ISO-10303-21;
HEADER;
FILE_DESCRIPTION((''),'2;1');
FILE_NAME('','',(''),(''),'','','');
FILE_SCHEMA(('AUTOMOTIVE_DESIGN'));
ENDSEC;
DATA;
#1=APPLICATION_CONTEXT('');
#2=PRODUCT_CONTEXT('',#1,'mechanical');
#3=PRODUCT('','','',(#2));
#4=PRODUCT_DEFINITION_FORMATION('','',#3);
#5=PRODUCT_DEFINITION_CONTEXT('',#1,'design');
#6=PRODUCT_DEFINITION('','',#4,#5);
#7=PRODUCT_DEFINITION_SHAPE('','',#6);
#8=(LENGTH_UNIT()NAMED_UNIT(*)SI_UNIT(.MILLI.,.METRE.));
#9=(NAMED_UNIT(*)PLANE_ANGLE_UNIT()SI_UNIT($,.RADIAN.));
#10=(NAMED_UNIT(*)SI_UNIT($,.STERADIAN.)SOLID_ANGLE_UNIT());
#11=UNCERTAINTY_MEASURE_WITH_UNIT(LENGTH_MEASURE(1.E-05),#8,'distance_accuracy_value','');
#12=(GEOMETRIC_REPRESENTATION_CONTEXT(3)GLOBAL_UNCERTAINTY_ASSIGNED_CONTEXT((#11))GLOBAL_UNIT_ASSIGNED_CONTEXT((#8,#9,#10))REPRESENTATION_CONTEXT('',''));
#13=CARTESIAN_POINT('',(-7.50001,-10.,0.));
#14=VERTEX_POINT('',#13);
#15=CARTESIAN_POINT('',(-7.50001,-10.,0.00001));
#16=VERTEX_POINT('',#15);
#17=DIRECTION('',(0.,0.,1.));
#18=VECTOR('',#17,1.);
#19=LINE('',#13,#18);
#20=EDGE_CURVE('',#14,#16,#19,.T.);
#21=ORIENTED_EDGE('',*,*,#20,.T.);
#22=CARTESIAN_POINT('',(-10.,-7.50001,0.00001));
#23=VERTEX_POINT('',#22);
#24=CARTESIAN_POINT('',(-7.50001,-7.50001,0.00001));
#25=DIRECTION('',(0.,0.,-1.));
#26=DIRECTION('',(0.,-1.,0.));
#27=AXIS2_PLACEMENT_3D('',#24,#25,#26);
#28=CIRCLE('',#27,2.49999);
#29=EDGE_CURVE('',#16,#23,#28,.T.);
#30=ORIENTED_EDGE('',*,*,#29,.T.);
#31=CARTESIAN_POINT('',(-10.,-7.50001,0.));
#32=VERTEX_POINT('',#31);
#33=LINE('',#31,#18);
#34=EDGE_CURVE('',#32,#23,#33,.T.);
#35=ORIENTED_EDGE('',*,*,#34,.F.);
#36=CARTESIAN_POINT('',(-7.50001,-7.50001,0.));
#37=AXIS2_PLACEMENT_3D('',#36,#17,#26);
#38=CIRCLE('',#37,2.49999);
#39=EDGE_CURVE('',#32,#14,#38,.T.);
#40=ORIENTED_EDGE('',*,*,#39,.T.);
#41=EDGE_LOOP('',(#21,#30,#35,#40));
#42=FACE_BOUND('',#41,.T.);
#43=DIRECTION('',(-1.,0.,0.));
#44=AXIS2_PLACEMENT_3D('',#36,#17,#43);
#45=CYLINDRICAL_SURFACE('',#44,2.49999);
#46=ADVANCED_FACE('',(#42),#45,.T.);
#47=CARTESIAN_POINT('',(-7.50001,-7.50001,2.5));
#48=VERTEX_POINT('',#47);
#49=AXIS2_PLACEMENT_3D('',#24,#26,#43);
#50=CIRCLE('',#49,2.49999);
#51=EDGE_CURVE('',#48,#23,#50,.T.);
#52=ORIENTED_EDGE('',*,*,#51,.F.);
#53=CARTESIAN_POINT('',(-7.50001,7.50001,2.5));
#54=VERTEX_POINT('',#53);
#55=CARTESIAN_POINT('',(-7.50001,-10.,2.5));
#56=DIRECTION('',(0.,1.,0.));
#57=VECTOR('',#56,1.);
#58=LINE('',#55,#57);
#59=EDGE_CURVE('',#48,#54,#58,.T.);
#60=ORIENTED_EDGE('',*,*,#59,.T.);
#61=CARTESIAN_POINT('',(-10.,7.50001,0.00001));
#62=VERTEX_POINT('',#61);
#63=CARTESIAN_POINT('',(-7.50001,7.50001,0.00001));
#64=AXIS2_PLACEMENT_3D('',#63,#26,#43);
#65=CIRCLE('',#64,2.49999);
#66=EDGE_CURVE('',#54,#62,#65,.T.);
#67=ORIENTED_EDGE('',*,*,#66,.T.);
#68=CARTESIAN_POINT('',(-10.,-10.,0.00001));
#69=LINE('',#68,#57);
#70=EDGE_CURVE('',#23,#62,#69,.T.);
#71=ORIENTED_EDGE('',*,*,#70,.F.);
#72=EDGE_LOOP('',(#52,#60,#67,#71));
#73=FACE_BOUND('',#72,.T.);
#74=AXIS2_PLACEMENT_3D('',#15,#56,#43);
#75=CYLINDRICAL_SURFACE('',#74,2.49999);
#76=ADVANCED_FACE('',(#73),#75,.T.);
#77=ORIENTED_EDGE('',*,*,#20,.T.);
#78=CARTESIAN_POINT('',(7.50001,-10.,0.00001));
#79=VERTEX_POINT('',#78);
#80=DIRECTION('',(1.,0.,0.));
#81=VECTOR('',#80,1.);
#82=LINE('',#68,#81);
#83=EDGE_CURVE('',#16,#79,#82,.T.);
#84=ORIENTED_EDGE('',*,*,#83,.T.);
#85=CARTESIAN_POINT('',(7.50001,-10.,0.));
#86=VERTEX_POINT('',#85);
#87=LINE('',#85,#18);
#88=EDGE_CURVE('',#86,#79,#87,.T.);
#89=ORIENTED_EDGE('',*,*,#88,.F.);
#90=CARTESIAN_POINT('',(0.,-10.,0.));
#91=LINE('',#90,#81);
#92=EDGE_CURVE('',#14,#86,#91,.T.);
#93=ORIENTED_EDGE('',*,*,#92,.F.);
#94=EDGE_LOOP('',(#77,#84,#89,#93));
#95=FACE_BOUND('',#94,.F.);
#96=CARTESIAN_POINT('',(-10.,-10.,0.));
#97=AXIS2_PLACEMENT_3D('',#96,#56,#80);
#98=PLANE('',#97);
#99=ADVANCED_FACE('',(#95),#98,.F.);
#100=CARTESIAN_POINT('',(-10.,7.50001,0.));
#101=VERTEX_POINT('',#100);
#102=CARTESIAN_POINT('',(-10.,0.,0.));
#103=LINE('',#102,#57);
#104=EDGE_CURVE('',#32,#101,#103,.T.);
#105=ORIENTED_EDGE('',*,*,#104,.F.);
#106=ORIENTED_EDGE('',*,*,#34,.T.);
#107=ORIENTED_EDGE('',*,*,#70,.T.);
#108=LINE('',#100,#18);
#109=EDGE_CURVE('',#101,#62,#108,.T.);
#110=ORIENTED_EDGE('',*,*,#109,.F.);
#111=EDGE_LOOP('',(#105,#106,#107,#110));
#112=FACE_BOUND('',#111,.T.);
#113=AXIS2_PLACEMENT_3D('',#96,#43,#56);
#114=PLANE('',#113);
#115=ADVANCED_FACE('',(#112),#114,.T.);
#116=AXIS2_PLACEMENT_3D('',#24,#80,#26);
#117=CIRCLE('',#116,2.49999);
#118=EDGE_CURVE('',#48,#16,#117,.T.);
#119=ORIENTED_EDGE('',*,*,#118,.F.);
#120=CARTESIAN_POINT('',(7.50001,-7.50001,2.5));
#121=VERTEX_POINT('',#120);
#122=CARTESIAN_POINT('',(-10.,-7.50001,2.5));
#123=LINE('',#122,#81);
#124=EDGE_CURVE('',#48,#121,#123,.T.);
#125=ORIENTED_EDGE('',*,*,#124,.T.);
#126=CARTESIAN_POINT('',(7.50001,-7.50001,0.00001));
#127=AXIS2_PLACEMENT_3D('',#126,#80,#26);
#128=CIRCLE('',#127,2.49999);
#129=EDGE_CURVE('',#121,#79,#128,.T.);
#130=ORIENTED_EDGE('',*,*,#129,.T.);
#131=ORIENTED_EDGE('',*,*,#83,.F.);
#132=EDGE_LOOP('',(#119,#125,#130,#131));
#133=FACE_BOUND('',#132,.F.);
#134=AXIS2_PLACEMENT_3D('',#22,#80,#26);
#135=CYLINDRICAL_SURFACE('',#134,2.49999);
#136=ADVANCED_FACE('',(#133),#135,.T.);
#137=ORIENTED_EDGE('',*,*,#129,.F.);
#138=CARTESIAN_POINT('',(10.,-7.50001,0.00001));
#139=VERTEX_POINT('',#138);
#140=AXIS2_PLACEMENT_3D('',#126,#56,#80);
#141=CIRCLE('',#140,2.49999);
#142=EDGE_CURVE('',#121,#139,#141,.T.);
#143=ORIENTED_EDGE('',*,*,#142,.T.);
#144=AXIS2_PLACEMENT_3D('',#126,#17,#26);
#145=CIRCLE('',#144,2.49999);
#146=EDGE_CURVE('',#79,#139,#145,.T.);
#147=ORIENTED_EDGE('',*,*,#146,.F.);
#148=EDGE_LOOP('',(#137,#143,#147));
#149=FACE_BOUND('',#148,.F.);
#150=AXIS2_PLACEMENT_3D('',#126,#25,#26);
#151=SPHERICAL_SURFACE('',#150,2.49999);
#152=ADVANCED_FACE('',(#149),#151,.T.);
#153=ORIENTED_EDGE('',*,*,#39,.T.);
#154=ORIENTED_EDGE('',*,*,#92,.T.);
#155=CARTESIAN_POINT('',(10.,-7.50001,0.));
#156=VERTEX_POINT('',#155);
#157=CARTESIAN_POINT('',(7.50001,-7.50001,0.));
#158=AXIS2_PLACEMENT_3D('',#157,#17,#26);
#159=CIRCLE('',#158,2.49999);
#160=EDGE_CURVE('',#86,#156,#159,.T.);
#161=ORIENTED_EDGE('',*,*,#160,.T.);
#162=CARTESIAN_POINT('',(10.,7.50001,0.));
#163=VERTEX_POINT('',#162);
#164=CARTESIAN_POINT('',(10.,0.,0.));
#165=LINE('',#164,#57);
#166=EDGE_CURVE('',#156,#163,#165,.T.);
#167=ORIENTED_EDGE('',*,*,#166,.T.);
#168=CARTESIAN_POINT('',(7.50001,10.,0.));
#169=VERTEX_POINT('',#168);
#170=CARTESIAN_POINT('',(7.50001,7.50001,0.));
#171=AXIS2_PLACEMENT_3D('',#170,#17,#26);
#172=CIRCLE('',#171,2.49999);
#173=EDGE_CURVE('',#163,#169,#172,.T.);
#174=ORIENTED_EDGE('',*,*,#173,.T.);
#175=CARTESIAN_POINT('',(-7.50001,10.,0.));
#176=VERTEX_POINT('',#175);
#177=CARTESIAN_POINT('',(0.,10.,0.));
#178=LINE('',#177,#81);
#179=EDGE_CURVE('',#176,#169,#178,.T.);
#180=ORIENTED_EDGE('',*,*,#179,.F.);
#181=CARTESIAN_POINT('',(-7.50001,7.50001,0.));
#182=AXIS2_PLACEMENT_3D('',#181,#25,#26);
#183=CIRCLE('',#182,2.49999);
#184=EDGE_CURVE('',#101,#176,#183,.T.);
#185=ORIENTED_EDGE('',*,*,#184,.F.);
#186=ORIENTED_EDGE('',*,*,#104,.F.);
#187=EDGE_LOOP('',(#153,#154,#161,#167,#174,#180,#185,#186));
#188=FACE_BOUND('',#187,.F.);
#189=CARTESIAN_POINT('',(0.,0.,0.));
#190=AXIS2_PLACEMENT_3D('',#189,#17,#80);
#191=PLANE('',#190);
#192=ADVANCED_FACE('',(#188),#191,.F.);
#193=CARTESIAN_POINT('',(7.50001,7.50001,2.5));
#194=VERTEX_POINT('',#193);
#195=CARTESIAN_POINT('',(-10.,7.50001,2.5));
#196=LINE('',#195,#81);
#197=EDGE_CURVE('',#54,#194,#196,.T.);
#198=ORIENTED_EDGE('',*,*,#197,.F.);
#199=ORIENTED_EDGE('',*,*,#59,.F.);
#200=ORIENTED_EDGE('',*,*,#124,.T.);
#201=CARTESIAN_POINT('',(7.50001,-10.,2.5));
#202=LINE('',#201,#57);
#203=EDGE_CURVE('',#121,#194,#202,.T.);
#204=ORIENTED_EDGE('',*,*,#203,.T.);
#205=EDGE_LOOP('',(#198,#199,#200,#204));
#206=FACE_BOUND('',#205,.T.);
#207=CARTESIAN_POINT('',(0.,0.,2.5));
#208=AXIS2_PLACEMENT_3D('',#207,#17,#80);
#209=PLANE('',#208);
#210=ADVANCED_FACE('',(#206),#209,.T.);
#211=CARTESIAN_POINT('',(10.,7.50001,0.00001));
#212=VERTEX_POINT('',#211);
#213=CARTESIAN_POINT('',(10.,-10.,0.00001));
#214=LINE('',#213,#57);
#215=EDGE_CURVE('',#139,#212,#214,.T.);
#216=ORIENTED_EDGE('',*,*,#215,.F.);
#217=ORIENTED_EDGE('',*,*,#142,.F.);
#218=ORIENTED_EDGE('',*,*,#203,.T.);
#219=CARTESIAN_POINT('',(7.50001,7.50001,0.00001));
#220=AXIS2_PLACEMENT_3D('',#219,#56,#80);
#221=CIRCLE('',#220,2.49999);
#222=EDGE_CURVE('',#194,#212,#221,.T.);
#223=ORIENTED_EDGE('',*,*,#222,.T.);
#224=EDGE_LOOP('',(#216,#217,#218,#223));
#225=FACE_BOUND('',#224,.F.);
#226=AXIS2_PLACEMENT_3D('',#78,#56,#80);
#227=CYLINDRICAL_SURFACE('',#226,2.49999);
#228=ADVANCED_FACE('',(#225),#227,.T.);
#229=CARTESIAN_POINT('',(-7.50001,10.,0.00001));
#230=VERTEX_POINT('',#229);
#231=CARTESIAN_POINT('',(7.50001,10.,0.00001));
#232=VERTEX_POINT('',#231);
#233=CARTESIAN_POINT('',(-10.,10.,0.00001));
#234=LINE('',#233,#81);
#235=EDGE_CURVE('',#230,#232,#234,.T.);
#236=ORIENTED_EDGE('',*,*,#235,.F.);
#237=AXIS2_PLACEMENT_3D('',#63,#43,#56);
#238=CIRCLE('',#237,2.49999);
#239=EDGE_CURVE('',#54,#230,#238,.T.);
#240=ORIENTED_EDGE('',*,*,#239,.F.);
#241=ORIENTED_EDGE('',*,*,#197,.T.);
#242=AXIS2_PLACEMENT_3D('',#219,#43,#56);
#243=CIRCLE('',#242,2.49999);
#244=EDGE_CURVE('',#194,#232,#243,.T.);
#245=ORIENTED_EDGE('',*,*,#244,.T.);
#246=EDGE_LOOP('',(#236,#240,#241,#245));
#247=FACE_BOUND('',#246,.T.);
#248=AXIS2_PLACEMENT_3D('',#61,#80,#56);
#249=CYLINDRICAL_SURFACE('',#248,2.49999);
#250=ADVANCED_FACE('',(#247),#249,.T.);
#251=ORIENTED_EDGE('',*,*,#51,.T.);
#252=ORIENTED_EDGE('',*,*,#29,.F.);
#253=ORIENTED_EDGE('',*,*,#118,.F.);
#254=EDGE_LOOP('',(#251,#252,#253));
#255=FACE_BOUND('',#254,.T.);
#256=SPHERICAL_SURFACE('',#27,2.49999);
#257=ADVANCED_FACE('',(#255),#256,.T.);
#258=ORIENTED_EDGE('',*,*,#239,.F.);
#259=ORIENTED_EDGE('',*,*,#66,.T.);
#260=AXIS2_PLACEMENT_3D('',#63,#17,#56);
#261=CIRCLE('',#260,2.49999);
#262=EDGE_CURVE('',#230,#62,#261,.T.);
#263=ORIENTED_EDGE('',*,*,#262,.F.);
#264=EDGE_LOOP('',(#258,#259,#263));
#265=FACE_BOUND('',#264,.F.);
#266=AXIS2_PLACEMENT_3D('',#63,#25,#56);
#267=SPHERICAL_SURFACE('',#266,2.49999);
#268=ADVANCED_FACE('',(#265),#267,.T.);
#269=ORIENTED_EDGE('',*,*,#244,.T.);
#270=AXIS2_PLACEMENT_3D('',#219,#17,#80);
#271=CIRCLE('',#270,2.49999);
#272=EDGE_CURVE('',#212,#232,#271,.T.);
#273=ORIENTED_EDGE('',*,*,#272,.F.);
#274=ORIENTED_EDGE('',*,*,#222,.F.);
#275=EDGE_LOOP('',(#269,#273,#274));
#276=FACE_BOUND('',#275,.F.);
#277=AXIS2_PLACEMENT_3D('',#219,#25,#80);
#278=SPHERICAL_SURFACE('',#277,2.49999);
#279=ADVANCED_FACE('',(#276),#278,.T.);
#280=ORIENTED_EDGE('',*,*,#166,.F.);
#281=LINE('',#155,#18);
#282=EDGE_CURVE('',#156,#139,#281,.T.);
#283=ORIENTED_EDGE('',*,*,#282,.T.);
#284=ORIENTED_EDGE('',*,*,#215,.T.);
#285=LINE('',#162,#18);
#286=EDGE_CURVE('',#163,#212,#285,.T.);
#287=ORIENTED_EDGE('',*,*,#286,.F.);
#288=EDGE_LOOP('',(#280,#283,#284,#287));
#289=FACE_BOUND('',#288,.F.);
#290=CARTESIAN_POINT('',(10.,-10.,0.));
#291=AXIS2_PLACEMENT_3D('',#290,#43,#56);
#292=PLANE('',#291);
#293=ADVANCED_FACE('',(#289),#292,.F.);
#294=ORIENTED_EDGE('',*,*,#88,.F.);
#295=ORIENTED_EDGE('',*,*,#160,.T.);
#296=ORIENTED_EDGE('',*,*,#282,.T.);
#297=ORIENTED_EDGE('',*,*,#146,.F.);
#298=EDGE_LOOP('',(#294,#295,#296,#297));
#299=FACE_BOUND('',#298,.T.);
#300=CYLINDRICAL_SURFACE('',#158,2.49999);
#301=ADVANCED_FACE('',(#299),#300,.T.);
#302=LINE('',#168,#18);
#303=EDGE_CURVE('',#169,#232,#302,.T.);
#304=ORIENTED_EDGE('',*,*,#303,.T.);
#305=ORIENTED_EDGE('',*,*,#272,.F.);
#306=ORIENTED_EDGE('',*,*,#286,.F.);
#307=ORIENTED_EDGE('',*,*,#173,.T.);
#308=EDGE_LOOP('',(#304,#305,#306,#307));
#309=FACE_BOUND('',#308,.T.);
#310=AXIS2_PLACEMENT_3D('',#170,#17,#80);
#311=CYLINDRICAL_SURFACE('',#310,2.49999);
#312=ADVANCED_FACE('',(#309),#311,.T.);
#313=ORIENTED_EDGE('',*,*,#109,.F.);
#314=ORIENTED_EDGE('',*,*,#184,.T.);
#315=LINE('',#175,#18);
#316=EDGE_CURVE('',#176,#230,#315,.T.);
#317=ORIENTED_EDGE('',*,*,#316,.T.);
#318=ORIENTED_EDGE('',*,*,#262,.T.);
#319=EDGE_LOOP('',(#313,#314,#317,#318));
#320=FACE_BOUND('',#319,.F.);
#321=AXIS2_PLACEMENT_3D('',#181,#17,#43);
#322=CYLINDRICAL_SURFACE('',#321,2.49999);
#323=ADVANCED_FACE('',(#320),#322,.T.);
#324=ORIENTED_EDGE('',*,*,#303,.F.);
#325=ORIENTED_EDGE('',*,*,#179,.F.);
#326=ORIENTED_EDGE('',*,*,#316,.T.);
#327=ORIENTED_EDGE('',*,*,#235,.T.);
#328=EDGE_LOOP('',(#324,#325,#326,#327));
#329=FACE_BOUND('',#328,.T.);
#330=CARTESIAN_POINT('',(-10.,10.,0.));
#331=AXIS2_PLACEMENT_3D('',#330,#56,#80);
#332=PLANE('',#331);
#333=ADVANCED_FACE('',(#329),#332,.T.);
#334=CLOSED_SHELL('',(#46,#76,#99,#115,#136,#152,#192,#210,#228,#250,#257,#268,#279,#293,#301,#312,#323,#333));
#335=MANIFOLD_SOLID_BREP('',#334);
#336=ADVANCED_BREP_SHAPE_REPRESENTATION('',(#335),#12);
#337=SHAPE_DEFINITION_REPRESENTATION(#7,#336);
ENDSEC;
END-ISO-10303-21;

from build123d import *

# Parameters (mm, degrees)
F0_W     = 20
F0_H     = 20
F1_DEPTH = 2.5
F2_R     = 2.49999


# Not quite as in the source:
# - a fillet or chamfer is up to 0.001 mm smaller than in the source, because OpenCascade refuses the exact size


with BuildPart() as f1:
    # F0 (on Top) → F1 (new body)
    with BuildSketch(Plane.XY):
        Rectangle(F0_W, F0_H)
    extrude(amount=F1_DEPTH)

    # F2 (radius 2.5 in the source; OpenCascade refuses exactly that, so slightly less here)
    f2_edges = [f1.edges().sort_by_distance(p)[0] for p in [
        (10, -10, 1.25),
        (10, 10, 1.25),
        (-10, -10, 1.25),
        (-10, 10, 1.25),
        (0, -10, 2.5),
        (10, 0, 2.5),
        (0, 10, 2.5),
        (-10, 0, 2.5),
    ]]
    fillet(f2_edges, radius=F2_R)


solid = f1.part
